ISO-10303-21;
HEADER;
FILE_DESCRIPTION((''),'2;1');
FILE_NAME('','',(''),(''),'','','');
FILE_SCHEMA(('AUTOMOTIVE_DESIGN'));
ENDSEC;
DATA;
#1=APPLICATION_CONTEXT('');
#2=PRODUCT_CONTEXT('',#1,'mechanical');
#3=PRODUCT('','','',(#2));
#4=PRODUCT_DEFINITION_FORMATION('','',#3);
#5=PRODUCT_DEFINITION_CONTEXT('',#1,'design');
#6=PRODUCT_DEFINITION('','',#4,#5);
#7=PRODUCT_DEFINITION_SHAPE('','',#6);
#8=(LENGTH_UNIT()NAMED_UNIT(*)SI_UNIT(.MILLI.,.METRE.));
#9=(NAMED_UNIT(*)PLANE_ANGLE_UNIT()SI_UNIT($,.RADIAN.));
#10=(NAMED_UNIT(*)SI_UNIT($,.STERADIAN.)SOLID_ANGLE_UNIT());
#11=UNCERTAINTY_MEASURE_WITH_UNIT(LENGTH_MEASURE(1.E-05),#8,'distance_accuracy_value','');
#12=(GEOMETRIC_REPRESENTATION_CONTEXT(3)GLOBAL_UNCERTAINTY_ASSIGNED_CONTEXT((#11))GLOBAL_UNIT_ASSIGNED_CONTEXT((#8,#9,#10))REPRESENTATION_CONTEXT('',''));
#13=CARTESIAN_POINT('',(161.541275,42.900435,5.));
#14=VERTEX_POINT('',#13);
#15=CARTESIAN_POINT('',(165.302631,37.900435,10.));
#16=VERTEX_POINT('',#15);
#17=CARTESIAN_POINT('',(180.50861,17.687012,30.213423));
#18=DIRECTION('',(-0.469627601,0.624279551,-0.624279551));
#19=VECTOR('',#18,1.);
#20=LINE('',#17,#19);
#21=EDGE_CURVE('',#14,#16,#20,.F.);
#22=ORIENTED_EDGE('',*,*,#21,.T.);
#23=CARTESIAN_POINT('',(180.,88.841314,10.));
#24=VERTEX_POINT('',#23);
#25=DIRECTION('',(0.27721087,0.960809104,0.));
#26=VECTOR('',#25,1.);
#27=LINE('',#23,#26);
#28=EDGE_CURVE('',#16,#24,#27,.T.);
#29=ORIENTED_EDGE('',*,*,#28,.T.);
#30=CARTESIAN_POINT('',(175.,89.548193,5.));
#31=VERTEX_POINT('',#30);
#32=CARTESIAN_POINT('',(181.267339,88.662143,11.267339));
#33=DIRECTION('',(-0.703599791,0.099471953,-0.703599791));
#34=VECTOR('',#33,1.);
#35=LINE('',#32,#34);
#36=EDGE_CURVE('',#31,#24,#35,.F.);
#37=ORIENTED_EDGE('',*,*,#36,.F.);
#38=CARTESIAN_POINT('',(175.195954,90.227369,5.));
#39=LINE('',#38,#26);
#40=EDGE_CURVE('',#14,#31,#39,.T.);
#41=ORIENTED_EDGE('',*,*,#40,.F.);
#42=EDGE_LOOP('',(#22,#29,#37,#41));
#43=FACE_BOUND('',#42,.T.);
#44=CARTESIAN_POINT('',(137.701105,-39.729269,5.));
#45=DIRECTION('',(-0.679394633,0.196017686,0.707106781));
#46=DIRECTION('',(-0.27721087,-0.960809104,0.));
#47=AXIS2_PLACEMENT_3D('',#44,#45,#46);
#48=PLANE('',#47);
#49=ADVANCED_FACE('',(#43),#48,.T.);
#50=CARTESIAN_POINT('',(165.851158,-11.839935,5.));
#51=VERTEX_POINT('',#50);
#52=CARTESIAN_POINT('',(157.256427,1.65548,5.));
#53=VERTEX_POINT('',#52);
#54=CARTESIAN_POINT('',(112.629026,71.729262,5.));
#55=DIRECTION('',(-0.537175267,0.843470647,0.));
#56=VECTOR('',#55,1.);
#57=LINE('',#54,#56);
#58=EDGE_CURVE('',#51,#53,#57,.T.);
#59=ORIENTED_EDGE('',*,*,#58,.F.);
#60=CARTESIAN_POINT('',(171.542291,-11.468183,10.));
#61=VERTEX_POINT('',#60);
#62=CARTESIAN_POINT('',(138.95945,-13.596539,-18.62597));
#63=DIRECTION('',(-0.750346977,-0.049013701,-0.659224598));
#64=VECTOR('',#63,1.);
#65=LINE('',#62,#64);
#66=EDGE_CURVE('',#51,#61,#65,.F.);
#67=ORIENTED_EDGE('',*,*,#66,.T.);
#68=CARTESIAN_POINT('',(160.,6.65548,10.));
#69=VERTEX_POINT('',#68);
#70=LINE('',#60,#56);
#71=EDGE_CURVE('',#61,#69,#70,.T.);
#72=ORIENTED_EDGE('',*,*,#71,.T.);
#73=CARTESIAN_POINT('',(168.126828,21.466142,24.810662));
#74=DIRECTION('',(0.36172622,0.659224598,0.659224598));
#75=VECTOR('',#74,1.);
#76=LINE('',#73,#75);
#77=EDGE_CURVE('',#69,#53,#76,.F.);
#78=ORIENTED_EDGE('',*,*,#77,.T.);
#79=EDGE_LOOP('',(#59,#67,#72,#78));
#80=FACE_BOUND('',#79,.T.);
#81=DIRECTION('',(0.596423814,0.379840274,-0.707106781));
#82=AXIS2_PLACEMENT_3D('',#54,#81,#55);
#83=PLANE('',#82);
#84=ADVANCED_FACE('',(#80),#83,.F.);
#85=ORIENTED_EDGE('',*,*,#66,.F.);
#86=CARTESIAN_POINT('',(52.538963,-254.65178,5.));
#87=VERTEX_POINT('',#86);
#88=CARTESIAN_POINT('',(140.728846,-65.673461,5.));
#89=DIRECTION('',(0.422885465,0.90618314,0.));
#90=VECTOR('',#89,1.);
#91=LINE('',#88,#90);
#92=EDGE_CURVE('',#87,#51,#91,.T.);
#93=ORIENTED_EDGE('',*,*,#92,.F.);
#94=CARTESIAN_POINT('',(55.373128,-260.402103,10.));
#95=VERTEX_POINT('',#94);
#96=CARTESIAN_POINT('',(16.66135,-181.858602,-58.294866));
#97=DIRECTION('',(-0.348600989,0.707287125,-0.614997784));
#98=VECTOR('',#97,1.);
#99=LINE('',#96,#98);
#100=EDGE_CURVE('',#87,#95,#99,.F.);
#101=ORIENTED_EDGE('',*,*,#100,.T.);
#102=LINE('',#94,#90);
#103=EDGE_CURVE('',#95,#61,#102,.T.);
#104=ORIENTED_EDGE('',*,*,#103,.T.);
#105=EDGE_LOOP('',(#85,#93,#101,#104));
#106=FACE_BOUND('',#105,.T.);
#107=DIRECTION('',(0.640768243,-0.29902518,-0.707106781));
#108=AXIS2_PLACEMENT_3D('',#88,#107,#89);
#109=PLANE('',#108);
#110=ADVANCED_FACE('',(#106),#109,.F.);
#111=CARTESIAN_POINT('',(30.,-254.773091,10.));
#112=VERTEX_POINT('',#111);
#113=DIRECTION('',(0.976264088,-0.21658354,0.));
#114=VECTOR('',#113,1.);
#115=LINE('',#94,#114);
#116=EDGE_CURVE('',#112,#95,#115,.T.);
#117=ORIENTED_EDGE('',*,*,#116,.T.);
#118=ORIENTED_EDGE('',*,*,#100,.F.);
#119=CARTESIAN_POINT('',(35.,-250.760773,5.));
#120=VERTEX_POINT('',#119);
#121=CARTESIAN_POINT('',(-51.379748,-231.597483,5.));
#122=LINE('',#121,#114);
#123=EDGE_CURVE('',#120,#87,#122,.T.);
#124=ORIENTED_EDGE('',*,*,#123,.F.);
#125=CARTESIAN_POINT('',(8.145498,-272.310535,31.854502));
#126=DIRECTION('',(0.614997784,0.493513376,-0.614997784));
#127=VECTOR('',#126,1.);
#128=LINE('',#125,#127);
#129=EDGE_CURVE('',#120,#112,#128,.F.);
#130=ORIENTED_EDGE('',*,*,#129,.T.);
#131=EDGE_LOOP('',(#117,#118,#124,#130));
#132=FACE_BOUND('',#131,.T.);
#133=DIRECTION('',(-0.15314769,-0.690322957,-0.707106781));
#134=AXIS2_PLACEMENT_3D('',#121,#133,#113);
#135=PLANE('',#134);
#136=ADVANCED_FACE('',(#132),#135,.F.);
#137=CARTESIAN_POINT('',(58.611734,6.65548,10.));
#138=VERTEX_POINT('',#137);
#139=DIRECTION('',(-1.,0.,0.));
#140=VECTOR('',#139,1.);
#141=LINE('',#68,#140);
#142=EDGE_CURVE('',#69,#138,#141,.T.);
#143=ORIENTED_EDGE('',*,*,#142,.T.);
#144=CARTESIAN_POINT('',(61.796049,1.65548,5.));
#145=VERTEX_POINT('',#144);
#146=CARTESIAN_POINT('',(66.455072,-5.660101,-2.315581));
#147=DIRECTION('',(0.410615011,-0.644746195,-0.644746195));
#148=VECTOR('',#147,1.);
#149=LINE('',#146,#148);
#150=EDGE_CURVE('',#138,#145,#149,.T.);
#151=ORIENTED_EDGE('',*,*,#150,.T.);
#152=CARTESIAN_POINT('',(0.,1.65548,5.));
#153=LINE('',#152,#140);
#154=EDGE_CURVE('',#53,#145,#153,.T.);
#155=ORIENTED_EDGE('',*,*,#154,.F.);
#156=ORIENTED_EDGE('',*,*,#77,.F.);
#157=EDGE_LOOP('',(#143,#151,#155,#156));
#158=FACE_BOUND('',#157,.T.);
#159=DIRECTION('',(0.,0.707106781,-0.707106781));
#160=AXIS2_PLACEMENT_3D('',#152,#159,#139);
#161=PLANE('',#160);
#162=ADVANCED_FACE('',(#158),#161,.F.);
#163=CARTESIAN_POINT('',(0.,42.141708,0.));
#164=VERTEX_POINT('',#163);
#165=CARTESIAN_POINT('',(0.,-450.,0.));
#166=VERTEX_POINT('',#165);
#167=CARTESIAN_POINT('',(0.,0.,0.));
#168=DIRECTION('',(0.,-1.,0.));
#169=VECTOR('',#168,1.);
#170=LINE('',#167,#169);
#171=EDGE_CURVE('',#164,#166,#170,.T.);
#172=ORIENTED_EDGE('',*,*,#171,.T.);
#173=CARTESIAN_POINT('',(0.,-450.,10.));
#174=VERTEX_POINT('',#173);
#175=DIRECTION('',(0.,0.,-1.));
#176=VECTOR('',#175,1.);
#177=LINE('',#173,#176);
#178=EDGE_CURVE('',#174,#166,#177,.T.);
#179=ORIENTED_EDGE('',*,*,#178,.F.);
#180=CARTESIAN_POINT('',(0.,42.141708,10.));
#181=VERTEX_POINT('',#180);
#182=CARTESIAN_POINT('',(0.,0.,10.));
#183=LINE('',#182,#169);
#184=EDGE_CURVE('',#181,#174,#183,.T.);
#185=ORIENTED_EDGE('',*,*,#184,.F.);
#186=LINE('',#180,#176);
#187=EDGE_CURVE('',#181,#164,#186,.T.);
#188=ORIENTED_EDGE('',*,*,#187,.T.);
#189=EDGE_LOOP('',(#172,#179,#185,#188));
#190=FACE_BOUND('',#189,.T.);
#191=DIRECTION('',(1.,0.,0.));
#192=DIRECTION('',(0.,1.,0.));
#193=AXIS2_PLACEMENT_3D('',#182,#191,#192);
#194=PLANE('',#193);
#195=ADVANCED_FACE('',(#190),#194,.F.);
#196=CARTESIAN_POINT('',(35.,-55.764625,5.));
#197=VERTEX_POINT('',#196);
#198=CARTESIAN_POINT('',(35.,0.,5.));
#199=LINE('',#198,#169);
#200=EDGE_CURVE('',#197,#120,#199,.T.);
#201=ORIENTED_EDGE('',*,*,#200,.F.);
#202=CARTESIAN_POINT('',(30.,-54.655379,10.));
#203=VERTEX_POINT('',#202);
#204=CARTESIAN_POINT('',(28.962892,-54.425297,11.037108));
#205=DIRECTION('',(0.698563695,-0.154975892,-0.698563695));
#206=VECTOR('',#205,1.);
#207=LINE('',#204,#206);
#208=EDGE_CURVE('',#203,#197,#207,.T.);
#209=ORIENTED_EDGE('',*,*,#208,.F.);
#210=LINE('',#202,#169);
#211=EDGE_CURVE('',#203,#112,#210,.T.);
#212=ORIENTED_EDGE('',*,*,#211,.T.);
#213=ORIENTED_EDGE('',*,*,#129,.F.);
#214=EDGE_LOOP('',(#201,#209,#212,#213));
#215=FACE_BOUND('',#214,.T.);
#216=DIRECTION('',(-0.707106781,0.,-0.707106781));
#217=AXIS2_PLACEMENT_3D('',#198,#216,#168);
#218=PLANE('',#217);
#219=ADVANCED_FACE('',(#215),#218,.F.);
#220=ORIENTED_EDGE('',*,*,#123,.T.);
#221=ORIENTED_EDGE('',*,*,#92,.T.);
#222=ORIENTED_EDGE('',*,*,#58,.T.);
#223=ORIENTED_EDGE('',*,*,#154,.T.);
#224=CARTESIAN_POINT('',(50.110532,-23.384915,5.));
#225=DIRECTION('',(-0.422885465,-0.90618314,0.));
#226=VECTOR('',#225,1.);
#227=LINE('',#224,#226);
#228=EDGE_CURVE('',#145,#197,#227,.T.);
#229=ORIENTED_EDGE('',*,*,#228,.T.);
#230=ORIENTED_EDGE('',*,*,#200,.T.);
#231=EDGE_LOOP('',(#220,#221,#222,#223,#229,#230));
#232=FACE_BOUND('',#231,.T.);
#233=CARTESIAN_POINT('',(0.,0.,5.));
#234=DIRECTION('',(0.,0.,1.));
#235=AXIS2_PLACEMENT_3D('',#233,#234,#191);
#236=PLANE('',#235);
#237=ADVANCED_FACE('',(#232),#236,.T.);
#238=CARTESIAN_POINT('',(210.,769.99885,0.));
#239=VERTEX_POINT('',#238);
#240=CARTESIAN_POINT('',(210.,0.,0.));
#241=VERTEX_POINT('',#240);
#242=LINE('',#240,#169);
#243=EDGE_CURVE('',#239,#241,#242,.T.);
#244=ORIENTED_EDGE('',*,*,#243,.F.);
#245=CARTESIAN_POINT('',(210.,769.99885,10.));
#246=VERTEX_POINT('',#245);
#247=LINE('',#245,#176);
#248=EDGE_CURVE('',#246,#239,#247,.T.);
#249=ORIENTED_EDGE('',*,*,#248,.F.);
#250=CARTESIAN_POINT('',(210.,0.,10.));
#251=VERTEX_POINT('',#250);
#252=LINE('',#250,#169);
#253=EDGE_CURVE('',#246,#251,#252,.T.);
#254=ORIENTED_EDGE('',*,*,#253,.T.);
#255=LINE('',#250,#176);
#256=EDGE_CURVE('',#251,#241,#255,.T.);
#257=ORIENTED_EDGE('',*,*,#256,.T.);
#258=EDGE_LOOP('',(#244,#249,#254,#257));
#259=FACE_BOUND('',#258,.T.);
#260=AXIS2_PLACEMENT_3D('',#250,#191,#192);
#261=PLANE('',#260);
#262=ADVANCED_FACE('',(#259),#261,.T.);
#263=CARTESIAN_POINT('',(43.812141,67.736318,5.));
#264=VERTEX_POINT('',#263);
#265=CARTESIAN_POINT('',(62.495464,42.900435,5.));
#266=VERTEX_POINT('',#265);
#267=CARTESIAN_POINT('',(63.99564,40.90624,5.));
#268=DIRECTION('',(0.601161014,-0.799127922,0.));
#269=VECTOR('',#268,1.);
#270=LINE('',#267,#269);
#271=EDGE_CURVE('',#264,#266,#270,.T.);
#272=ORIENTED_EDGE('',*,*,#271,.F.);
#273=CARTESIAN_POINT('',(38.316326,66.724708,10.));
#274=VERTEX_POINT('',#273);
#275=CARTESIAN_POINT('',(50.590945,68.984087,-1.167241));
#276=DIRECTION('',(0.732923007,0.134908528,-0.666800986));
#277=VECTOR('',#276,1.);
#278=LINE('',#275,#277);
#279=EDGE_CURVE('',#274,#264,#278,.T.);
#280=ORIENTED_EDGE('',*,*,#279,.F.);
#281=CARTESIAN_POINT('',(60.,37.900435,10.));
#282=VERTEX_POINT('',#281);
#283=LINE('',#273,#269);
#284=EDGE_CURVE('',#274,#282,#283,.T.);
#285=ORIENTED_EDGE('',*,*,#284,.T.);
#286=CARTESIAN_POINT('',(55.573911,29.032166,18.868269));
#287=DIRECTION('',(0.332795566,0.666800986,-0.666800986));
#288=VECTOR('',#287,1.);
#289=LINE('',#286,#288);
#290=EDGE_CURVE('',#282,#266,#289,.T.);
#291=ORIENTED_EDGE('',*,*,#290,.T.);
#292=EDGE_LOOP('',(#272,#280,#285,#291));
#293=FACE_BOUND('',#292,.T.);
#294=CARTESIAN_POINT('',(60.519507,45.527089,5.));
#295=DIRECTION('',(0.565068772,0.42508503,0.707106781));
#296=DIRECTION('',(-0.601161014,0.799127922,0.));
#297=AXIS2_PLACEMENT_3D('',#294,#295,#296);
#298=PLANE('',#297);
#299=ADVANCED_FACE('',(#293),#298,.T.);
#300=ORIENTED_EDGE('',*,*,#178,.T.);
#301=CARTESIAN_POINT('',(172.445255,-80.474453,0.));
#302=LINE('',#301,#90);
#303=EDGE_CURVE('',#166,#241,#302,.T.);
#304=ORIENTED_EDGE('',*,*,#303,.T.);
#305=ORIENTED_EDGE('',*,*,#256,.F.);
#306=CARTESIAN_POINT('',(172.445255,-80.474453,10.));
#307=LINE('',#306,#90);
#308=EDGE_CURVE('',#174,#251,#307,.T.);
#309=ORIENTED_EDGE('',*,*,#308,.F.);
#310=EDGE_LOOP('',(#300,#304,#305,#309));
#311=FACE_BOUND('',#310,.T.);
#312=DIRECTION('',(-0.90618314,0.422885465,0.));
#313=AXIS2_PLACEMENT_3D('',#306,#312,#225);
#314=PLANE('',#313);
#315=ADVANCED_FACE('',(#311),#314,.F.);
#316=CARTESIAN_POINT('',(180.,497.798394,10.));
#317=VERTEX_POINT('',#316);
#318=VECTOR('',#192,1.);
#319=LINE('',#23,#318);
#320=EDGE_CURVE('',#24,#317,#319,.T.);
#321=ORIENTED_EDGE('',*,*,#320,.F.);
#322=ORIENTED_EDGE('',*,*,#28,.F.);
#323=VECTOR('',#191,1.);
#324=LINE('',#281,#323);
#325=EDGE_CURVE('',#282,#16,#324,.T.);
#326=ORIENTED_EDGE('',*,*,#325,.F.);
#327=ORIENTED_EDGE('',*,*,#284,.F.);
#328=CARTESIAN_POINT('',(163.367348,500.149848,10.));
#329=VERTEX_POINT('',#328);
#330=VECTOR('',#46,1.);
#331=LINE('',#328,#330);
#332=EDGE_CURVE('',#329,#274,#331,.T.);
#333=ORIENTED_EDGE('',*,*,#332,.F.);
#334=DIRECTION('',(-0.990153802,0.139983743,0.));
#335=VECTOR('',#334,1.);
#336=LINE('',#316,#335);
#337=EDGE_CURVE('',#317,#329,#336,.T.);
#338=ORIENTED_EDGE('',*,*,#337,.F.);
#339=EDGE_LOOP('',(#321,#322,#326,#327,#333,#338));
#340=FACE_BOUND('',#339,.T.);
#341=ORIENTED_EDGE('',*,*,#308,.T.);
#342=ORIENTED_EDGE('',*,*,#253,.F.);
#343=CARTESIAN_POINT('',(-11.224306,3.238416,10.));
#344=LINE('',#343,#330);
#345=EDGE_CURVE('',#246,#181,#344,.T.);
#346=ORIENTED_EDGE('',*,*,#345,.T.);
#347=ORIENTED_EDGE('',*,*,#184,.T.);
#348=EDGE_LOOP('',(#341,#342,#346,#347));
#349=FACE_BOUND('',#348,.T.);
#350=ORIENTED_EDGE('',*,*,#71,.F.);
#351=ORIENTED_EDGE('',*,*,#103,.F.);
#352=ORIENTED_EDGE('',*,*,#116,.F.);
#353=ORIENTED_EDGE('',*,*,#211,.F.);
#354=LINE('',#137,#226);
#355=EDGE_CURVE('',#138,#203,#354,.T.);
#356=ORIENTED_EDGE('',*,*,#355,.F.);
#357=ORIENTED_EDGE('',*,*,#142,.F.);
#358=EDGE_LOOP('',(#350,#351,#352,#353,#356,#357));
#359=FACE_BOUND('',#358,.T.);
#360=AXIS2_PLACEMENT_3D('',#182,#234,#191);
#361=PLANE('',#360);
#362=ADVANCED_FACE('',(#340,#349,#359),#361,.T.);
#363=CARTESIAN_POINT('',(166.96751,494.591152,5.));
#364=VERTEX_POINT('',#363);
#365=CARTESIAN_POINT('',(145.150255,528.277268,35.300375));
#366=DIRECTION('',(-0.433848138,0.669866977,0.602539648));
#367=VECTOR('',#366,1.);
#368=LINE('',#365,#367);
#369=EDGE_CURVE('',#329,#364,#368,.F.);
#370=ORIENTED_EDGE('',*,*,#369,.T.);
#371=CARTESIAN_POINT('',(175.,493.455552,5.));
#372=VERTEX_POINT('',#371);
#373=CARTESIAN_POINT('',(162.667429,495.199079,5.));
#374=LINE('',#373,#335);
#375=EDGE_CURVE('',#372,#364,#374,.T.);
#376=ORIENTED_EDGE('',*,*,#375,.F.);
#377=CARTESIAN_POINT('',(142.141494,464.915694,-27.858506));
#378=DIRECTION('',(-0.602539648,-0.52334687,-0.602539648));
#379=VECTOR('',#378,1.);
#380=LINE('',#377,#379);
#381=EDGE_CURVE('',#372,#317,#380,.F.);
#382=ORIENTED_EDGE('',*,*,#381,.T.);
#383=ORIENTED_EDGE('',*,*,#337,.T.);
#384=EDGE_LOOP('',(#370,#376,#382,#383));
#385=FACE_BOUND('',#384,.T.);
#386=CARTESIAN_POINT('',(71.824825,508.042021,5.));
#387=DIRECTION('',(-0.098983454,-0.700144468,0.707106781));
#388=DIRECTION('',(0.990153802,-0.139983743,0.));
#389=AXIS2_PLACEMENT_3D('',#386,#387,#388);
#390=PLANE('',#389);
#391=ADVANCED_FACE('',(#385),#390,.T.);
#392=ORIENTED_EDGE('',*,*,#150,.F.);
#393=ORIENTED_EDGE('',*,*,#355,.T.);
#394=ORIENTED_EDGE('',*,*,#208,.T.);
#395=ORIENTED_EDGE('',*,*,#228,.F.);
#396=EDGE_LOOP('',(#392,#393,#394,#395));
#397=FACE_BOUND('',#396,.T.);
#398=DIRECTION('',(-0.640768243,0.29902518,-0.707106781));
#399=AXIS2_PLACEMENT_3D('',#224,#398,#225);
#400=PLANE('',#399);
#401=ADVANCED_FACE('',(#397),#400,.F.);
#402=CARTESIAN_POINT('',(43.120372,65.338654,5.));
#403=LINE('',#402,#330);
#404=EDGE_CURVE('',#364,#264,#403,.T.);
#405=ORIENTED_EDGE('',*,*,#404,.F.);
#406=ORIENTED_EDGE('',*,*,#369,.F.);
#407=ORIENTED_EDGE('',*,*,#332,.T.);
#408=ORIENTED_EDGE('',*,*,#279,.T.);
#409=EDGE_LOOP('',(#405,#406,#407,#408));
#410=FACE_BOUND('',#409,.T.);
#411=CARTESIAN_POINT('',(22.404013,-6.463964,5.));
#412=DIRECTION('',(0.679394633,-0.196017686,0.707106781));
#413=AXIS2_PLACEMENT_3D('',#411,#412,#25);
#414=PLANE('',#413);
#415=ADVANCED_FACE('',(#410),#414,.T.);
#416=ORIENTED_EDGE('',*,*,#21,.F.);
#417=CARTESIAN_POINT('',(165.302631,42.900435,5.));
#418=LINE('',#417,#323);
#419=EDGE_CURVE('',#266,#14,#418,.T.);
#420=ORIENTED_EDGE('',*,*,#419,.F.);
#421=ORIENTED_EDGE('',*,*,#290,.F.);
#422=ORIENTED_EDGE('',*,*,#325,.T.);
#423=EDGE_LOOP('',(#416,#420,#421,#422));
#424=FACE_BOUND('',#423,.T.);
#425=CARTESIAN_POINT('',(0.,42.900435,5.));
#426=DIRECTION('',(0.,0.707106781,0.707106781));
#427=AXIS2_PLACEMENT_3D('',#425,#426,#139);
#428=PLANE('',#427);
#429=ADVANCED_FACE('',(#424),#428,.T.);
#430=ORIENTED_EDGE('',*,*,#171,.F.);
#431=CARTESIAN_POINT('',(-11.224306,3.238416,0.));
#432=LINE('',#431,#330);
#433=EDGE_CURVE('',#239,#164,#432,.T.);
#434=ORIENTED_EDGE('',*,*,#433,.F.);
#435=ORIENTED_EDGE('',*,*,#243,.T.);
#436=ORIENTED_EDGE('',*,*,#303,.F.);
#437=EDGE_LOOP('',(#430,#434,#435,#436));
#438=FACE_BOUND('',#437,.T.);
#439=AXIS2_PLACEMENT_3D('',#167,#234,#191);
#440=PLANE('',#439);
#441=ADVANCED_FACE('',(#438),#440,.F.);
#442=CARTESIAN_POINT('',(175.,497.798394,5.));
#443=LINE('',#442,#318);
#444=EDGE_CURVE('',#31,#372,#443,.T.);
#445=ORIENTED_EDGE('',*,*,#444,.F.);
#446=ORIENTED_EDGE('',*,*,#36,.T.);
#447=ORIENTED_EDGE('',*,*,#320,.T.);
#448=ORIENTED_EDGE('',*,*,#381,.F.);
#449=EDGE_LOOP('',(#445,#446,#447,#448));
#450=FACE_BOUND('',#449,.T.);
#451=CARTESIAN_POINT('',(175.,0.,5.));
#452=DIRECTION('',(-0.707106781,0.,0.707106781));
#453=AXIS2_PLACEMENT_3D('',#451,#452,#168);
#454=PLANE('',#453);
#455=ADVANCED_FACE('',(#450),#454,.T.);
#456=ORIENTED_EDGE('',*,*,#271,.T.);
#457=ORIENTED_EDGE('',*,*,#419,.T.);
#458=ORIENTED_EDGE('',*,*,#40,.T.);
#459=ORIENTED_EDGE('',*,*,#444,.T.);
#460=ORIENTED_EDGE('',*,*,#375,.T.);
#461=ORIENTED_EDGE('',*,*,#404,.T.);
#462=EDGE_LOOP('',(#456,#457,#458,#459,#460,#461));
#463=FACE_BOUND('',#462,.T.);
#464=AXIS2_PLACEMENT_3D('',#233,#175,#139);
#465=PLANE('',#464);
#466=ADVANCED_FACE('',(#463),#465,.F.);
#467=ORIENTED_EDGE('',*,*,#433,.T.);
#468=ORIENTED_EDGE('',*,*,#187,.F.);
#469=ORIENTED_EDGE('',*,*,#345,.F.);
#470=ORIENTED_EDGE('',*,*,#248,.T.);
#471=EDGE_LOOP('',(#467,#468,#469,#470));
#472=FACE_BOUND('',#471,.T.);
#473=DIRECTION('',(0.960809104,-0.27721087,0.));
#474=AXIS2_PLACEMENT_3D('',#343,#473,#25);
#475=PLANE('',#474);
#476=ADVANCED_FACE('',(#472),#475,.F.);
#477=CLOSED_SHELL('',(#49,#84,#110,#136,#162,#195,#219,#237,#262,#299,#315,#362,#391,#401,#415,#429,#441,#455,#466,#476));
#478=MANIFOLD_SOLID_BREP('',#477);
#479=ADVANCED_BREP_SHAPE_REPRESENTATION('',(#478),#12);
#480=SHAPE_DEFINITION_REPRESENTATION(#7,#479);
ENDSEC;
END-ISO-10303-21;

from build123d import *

# Parameters (mm, degrees)
BOSS_EXTRU_1_DEPTH      = 10
ENL_V_MAT_EXTRU_1_DEPTH = 5
CHANFREIN1_SIZE         = 5


with BuildPart() as part:
    # Esquisse1 → Boss.-Extru.1 (new body)
    with BuildSketch(Plane.XY):
        Polygon((0, 0), (0, -450), (210, 0), (210, 727.857142857), (210, 769.998850412), (0, 42.141707555), align=None)
    extrude(amount=BOSS_EXTRU_1_DEPTH)

    # Esquisse2 → Enlèv. mat.-Extru.1 (cut)
    with BuildSketch(Plane.XY.offset(10)):
        Polygon((60, 37.900434867), (165.302631408, 37.900434867), (180, 88.841314442), (180, 497.798394051), (163.367347804, 500.149847834), (38.316326098, 66.724707975), align=None)
        Polygon((58.611734047, 6.655480102), (30, -54.655378569), (30, -254.773091326), (55.37312792, -260.402102926), (171.542290693, -11.468182697), (160, 6.655480102), align=None)
    extrude(amount=-ENL_V_MAT_EXTRU_1_DEPTH, mode=Mode.SUBTRACT)

    # Chanfrein1
    chanfrein1_edges = [part.edges().sort_by_distance(p)[0] for p in [
        (165.771145347, -2.406351297, 5),
        (113.457709307, -135.935142812, 5),
        (42.68656396, -257.587597126, 5),
        (30, -154.714234948, 5),
        (44.305867023, -23.999949233, 5),
        (109.305867023, 6.655480102, 5),
        (171.683673902, 498.974120942, 5),
        (180, 293.319854246, 5),
        (172.651315704, 63.370874655, 5),
        (112.651315704, 37.900434867, 5),
        (49.158163049, 52.312571421, 5),
        (100.841836951, 283.437277905, 5),
    ]]
    chamfer(chanfrein1_edges, length=CHANFREIN1_SIZE - 0.0001)  # a hair under: the kernel refuses the full size


solid = part.part
